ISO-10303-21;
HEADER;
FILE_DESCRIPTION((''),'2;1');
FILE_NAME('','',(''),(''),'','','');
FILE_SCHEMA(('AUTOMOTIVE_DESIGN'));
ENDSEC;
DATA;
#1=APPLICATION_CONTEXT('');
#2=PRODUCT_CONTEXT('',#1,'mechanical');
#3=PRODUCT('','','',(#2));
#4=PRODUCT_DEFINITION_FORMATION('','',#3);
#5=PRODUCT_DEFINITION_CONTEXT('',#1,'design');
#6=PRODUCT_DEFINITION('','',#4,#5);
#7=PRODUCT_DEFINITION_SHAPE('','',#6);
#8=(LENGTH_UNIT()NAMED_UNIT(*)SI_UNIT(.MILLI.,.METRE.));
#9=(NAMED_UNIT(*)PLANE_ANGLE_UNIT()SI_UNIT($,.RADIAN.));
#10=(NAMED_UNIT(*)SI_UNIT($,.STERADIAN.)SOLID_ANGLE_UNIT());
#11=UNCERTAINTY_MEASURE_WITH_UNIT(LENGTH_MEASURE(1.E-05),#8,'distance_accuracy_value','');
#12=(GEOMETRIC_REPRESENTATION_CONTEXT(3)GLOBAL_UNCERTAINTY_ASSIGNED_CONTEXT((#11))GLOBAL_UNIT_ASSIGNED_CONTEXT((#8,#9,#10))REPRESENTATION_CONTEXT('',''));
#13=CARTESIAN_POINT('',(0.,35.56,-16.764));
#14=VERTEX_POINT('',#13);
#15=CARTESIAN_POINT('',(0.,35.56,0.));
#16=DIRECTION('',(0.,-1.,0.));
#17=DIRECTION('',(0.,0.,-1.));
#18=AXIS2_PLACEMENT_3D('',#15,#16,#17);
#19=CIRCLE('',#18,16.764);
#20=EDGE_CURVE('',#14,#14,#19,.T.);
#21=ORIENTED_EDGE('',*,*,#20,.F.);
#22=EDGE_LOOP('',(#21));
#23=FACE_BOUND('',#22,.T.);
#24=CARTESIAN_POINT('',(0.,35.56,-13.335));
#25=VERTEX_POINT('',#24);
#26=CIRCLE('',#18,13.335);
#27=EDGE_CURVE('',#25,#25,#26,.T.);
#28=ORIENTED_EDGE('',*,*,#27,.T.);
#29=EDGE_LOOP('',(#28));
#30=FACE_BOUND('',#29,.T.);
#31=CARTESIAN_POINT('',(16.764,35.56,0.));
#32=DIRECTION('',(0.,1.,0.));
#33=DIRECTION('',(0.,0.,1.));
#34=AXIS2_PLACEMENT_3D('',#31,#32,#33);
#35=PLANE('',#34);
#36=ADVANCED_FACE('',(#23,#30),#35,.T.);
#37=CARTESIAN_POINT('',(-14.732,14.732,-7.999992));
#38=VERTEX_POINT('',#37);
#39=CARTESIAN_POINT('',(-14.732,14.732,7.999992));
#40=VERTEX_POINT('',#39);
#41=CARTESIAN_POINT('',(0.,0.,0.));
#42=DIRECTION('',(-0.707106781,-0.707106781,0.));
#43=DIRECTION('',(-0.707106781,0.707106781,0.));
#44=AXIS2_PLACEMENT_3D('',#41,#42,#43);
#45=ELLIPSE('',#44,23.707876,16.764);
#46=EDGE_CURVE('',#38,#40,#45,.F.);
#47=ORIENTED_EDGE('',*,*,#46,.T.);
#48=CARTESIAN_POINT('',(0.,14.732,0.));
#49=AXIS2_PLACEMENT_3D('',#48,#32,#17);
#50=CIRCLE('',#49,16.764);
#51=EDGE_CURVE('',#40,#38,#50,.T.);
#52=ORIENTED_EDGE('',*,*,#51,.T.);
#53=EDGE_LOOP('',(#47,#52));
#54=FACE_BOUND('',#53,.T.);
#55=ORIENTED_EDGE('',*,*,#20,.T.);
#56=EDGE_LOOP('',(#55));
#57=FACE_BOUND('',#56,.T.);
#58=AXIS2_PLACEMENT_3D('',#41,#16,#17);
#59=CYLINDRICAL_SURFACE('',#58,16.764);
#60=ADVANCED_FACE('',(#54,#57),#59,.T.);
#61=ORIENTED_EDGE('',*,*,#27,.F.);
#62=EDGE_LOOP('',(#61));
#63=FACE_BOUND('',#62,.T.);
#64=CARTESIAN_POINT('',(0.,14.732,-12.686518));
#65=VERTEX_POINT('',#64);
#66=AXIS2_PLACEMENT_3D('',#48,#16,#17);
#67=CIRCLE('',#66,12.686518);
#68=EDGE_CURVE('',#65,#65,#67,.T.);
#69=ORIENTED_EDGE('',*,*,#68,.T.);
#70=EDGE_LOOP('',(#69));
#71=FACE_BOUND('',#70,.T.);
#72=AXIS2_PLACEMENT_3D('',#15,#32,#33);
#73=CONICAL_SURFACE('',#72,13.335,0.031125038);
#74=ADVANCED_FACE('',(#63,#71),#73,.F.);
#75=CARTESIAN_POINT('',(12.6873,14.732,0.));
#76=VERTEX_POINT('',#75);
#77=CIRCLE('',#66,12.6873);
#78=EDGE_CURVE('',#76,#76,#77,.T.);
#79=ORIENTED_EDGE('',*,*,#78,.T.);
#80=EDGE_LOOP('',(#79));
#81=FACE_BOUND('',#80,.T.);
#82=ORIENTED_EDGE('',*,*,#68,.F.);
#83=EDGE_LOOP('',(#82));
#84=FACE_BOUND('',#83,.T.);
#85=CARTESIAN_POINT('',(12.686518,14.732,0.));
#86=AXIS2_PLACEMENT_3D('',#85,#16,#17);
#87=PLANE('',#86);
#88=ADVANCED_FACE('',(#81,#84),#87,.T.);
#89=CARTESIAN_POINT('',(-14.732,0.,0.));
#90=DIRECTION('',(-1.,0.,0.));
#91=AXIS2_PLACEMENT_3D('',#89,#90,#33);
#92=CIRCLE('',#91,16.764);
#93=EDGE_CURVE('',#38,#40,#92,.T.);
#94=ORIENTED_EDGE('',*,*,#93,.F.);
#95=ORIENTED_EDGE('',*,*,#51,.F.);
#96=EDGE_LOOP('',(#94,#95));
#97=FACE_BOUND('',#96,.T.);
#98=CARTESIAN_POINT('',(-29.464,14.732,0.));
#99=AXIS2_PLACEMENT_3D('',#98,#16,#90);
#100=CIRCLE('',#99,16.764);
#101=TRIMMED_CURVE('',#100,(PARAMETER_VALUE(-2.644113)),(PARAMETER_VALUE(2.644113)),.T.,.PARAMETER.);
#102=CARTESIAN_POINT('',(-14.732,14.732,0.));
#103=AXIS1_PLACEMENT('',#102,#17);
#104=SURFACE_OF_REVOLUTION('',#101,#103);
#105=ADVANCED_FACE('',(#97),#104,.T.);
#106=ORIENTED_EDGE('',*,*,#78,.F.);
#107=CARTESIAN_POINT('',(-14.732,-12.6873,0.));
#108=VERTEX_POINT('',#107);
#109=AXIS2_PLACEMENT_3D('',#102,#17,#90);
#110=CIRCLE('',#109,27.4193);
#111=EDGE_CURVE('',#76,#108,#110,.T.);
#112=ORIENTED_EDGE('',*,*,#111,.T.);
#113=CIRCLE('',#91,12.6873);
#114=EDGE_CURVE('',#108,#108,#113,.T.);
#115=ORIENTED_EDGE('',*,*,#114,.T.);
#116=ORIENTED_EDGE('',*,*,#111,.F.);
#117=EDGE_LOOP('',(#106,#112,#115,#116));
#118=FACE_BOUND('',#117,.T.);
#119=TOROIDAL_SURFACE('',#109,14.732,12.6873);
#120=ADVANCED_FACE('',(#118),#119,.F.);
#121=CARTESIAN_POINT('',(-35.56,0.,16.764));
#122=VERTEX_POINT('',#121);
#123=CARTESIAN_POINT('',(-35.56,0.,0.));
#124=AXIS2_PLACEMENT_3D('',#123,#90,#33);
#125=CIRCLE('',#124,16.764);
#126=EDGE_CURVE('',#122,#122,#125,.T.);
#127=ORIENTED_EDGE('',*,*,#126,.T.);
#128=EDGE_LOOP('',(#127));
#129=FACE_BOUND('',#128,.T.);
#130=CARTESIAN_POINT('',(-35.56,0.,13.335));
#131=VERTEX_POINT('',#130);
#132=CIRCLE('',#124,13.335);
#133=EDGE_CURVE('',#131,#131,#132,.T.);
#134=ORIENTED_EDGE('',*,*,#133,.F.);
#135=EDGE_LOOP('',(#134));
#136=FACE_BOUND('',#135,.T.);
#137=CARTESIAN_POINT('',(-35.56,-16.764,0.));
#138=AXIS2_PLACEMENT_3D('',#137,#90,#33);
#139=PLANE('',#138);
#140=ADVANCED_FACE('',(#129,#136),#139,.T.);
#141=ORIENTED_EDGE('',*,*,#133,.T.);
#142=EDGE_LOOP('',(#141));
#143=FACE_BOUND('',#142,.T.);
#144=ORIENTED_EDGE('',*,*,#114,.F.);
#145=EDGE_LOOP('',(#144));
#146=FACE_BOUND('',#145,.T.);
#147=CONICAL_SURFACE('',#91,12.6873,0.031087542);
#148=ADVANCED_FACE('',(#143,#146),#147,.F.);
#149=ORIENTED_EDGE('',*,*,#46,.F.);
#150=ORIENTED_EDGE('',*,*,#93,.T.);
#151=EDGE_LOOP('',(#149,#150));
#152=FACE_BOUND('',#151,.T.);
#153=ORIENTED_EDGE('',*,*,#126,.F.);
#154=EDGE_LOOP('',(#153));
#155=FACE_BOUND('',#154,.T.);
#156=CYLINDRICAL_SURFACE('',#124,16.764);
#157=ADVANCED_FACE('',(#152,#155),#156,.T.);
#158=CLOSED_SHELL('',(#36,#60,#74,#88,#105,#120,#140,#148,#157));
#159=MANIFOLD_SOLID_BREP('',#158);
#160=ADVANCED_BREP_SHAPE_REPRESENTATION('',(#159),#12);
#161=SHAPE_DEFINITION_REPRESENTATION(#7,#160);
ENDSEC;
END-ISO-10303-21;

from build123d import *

# Parameters (mm, degrees)
SKETCH3_R   = 16.764
SKETCH3_R_2 = 12.6873


with BuildPart() as part:
    # Sketch1 → Revolve1 (revolve)
    with BuildSketch(Plane.XY):
        Polygon((-14.732, -12.6873), (-14.732, -16.764), (-35.56, -16.764), (-35.56, -13.335), align=None)
    revolve(axis=Axis((-35.56, 0, 0), (1, 0, 0)))


with BuildPart() as body_2:
    # Sketch2 → Revolve2 (revolve)
    with BuildSketch(Plane.XY):
        Polygon((13.335, 35.56), (12.686518, 14.732), (16.764, 14.732), (16.764, 35.56), align=None)
    revolve(axis=Axis((0, 0, 0), (0, 1, 0)))


with BuildPart() as sweep1_tool:
    # Sweep1: sweep along a path in Sketch4
    with BuildLine(Plane.XY) as sweep1_path:
        ThreePointArc((-14.732, 0), (-4.314903, 4.314903), (0, 14.732))
    # Sketch3 → Sweep1 (sweep)
    with BuildSketch(Plane(origin=(-14.732, 0, 0), x_dir=(0, 0, -1), z_dir=(1, 0, 0))):
        Circle(SKETCH3_R)
        Circle(SKETCH3_R_2, mode=Mode.SUBTRACT)
    sweep(path=sweep1_path.line)


with BuildPart() as part_1:
    add(part.part)


with BuildPart() as part_2:
    # Sweep1: joined with sweep1_tool
    add(part_1.part.fuse(sweep1_tool.part, body_2.part, tol=0.00001))


solid = part_2.part
